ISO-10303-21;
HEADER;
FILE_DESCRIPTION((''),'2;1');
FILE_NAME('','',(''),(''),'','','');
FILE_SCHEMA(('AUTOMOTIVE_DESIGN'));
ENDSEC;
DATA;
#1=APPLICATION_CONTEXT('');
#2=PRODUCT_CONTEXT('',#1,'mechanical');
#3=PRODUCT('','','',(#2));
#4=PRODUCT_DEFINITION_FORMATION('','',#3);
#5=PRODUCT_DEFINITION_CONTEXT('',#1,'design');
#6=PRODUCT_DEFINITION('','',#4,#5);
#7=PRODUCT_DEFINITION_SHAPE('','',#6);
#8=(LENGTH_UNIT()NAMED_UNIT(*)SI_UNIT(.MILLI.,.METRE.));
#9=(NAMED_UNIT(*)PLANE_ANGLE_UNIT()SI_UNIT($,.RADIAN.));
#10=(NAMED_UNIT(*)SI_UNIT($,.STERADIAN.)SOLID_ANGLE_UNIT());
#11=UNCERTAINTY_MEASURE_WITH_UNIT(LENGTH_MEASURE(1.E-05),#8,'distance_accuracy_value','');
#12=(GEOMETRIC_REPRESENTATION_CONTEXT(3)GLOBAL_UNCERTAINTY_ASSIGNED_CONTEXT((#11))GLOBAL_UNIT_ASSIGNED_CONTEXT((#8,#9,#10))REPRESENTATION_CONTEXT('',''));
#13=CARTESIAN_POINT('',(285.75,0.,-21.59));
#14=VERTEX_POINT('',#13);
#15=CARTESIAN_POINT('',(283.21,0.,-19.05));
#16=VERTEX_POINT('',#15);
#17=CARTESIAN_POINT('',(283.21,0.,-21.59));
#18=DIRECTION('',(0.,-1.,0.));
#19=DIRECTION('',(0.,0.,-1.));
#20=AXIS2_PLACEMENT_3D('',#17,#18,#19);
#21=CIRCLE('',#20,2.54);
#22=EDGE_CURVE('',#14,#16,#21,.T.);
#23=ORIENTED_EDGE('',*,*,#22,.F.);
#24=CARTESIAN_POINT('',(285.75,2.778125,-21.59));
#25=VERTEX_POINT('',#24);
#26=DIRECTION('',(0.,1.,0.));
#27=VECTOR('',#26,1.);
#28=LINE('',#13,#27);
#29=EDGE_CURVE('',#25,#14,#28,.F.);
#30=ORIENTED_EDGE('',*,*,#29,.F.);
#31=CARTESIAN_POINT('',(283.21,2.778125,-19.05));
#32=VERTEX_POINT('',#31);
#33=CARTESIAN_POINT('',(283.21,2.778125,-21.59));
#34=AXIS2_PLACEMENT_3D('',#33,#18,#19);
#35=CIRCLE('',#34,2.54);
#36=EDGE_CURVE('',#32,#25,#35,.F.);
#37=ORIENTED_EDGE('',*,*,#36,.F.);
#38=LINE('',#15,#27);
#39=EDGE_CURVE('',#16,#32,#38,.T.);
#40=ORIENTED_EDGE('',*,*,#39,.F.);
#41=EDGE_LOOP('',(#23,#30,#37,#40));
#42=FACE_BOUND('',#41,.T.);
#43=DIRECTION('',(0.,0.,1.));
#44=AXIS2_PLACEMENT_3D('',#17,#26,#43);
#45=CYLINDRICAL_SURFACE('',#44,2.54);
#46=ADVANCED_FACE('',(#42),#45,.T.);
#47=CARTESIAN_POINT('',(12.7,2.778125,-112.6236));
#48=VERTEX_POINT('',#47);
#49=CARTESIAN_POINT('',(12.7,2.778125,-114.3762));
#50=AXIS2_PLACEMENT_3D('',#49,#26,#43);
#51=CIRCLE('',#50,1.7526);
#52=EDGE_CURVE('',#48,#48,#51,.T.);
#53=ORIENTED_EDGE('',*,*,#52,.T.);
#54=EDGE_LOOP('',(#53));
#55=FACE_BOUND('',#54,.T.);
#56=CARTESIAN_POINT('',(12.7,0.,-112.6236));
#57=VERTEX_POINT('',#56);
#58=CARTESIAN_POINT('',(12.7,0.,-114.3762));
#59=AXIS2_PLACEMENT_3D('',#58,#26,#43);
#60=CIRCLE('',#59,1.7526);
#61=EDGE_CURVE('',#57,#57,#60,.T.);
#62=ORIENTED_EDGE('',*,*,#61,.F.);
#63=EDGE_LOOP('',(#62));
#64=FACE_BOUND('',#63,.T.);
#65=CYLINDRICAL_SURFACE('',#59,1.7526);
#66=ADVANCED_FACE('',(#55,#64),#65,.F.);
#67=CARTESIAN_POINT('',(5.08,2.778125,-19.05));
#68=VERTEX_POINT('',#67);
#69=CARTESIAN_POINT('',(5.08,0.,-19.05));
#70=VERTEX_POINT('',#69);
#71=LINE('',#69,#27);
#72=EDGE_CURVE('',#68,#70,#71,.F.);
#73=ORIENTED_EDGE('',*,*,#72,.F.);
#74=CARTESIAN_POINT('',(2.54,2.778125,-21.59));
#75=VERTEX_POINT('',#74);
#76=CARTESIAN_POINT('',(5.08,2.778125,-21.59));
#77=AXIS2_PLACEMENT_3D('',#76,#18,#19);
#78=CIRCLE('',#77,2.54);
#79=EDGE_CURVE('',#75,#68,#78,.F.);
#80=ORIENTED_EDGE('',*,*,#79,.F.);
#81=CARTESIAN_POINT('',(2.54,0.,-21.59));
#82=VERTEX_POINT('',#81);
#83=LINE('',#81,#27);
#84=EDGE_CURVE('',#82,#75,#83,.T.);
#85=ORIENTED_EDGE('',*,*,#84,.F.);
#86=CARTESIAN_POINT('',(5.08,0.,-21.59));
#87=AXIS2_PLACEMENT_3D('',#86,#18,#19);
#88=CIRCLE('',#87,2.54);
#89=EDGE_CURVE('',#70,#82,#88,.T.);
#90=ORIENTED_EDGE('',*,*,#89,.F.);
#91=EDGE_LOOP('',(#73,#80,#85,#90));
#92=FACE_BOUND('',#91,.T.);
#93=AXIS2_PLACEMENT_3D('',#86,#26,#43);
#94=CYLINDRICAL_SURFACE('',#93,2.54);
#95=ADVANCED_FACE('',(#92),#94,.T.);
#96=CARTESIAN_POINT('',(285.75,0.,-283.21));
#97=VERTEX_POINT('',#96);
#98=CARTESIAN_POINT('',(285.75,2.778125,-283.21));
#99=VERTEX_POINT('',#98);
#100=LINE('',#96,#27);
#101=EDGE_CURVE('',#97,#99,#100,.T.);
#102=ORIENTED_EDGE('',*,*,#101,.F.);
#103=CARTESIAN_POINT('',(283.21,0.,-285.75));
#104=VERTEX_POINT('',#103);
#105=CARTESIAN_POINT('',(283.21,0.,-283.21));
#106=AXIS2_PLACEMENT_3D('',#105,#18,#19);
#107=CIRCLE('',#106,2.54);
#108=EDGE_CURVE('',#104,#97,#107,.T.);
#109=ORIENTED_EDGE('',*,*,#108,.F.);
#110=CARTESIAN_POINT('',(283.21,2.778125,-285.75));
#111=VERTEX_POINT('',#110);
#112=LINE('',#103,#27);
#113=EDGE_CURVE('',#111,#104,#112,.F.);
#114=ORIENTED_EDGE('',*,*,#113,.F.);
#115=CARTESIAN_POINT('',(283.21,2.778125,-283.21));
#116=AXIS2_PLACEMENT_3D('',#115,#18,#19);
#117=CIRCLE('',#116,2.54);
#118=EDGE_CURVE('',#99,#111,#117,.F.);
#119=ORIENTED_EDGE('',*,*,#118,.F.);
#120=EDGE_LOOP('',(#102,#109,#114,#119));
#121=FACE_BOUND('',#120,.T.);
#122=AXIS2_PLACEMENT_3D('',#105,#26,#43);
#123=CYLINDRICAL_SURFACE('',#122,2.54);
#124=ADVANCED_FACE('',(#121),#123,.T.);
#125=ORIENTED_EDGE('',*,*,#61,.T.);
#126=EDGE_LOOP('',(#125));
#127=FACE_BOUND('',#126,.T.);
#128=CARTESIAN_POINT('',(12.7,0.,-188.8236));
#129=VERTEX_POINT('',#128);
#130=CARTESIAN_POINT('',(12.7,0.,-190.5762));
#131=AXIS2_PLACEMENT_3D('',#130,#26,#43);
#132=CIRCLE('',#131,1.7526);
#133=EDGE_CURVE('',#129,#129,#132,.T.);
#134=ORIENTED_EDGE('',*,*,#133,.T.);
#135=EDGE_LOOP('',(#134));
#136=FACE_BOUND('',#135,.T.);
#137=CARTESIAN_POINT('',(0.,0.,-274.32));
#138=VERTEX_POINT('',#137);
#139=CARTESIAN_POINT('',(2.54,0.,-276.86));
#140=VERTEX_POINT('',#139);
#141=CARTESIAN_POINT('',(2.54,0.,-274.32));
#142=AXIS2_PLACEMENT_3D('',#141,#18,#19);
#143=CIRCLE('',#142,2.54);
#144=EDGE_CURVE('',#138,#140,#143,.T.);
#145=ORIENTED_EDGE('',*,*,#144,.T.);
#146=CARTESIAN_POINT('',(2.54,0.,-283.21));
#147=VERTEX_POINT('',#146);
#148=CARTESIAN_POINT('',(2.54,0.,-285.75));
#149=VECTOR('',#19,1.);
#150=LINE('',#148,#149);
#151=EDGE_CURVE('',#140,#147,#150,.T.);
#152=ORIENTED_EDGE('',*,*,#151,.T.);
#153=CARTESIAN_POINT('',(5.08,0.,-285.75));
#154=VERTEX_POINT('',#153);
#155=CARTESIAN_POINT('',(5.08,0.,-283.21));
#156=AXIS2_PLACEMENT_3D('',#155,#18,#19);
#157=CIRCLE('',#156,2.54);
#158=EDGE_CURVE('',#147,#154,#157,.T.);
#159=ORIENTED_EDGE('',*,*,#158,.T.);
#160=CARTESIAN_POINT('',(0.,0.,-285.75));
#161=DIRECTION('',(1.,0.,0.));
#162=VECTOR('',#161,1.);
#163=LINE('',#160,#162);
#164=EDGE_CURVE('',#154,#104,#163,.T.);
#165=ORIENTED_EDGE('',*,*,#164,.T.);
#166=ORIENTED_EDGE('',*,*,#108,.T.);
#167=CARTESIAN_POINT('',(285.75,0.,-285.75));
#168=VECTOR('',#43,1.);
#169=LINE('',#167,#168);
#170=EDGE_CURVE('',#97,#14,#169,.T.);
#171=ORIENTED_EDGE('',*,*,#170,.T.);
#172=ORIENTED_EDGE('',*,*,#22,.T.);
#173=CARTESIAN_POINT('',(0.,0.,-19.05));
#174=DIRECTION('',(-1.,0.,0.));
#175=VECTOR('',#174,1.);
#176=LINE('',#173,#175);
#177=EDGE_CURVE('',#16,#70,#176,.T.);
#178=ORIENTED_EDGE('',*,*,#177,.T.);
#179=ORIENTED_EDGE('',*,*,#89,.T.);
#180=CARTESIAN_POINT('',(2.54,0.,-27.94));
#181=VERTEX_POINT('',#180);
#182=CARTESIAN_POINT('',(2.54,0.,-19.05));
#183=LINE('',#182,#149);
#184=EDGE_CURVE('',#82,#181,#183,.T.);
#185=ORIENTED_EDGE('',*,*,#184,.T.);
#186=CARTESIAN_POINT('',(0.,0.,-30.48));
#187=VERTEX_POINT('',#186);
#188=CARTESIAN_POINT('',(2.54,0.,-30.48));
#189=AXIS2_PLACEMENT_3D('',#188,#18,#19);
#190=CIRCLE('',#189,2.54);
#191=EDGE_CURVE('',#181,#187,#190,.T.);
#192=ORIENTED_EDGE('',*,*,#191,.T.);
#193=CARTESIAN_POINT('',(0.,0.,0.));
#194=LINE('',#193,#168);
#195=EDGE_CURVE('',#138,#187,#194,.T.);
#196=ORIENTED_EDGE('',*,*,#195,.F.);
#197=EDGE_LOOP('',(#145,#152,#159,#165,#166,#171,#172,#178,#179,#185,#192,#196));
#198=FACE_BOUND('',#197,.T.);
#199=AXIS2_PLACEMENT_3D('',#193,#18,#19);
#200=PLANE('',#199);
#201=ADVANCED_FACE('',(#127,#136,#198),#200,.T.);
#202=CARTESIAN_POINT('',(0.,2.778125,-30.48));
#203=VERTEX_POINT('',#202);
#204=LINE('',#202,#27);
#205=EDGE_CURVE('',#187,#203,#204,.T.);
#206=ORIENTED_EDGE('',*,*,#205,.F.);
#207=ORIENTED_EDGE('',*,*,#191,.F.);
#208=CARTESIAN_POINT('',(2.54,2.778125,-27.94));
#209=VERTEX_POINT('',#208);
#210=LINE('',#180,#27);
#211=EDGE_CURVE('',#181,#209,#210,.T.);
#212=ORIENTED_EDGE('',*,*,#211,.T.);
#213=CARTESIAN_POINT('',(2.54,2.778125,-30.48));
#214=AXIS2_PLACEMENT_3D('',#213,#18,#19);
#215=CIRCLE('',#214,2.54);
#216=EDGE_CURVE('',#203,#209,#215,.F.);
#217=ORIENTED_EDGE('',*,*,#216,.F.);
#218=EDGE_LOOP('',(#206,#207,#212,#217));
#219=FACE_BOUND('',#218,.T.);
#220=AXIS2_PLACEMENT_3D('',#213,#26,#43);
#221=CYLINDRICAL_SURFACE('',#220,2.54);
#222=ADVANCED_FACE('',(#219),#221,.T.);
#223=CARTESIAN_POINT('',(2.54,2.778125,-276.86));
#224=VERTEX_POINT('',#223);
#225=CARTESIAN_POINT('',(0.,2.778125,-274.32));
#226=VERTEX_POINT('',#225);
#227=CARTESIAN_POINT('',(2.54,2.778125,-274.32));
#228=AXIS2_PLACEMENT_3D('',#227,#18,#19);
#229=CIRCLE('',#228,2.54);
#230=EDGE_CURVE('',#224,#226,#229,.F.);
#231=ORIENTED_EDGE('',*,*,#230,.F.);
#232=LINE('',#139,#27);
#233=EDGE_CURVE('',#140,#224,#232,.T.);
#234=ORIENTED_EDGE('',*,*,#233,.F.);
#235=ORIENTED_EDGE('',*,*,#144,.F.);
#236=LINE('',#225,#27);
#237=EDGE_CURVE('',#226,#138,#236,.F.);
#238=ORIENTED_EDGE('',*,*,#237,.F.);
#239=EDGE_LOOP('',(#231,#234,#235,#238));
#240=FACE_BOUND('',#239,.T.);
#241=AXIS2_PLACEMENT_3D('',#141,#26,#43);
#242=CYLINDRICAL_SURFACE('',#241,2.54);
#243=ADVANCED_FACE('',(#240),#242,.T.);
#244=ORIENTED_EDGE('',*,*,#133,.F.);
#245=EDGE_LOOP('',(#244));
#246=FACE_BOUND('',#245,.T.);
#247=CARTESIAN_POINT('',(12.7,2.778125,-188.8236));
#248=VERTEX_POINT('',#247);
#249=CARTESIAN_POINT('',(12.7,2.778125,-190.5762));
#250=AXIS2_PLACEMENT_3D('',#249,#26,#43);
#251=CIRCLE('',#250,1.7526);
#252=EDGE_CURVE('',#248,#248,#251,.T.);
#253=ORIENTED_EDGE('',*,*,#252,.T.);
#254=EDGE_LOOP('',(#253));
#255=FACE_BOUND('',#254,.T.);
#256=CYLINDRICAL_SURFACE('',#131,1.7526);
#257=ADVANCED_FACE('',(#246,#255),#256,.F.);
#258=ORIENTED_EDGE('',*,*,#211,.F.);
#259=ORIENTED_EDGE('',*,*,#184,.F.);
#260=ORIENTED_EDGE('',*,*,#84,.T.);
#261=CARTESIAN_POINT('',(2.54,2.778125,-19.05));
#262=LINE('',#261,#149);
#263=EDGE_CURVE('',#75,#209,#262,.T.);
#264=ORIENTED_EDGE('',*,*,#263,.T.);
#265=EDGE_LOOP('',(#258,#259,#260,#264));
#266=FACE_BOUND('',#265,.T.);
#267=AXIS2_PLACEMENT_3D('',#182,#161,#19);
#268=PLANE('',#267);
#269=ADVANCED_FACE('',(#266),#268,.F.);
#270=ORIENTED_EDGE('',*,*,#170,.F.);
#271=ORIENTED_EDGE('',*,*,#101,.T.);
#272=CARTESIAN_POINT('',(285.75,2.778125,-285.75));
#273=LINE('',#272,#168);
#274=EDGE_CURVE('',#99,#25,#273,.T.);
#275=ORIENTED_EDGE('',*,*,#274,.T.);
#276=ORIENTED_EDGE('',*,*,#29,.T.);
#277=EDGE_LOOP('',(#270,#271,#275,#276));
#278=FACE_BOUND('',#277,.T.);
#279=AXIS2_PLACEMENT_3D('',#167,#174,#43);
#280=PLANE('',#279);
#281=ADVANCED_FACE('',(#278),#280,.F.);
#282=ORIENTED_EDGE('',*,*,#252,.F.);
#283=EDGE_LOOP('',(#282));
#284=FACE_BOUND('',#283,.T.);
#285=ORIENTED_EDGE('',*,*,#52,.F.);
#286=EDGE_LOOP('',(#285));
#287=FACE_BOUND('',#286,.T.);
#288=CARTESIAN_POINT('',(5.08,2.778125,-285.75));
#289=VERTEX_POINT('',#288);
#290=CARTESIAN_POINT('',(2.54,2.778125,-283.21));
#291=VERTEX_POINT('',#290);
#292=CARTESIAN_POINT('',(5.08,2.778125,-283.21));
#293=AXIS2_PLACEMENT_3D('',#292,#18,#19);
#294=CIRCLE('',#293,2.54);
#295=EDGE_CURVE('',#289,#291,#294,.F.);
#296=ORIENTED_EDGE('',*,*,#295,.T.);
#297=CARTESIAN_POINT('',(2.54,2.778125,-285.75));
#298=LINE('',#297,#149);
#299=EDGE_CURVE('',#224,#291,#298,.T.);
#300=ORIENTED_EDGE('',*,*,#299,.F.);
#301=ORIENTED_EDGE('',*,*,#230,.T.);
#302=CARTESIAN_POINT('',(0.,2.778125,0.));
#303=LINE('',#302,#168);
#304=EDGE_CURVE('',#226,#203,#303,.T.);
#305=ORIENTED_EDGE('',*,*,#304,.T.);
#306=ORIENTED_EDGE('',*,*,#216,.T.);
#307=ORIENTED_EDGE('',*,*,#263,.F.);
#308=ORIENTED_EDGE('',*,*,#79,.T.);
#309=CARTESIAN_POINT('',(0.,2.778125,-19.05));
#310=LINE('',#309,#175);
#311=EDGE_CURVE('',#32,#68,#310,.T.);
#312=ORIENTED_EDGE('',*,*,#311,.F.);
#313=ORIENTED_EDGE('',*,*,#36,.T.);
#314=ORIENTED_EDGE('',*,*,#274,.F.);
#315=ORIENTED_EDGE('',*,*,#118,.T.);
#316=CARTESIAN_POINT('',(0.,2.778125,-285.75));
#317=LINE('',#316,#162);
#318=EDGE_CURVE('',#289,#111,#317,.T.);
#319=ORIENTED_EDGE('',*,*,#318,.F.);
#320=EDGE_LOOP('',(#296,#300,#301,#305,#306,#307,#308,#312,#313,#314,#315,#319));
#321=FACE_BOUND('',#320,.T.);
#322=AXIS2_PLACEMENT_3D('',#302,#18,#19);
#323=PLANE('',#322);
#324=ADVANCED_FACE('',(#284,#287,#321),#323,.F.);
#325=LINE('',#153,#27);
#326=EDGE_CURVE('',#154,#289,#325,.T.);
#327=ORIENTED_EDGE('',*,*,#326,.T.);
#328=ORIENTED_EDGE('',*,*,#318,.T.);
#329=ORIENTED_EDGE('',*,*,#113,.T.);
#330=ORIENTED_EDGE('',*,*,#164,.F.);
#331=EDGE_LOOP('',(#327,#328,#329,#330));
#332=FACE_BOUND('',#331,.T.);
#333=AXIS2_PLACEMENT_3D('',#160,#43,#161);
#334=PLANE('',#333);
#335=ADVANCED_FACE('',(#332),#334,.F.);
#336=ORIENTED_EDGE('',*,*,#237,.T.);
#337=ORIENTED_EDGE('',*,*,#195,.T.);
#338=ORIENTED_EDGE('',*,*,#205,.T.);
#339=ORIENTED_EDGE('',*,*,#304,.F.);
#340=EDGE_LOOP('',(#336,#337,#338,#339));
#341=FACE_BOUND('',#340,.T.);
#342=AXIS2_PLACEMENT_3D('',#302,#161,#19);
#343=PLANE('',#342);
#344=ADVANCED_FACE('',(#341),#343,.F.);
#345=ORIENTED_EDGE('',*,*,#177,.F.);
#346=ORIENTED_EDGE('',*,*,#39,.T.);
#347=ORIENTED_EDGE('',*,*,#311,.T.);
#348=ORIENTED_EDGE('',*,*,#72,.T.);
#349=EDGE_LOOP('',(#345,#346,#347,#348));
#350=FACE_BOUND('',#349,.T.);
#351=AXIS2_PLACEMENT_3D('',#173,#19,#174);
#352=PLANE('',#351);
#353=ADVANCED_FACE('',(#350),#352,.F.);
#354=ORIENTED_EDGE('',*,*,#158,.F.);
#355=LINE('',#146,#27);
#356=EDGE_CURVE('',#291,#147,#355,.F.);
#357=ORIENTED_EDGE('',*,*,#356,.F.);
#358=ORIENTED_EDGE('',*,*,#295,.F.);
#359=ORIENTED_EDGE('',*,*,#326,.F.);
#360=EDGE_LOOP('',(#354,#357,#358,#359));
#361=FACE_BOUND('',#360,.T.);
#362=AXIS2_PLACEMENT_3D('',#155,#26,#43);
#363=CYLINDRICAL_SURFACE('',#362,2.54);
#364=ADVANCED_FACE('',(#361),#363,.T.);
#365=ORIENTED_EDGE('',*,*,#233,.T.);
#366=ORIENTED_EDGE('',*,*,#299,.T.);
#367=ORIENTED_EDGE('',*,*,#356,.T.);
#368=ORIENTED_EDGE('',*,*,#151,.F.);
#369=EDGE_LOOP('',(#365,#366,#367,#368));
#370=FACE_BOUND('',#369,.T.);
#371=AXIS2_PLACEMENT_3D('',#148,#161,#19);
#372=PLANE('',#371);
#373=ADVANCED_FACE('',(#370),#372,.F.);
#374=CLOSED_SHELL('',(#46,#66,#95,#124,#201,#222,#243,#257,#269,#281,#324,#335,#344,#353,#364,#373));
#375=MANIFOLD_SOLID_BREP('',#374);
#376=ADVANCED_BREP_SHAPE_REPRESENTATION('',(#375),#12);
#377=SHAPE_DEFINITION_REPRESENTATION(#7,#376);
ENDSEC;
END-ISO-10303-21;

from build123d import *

# Parameters (mm, degrees)
SKETCH1_W           = 304.8
SKETCH1_H           = 304.8
BOSS_EXTRUDE1_DEPTH = 2.778125
SKETCH2_W           = 304.8
SKETCH2_H           = 19.05
CUT_EXTRUDE1_DEPTH  = 432.061246204
SKETCH4_R           = 1.7526
CUT_EXTRUDE3_DEPTH  = 418.808353768
SKETCH5_W           = 19.05
SKETCH5_H           = 266.7
CUT_EXTRUDE4_DEPTH  = 418.808353768
SKETCH6_W           = 2.54
SKETCH6_H           = 8.89
CUT_EXTRUDE5_DEPTH  = 405.121074653
FILLET1_R           = 2.54


with BuildPart() as part:
    # Sketch1 → Boss-Extrude1 (new body)
    with BuildSketch(Plane(origin=(0, 0, 0), x_dir=(1, 0, 0), z_dir=(0, 1, 0))):
        with Locations((152.4, 152.4)):
            Rectangle(SKETCH1_W, SKETCH1_H)
    extrude(amount=BOSS_EXTRUDE1_DEPTH)

    # Sketch2 → Cut-Extrude1 (cut, through all)
    with BuildSketch(Plane(origin=(0, 2.778125, 0), x_dir=(1, 0, 0), z_dir=(0, 1, 0))):
        with Locations((152.4, 9.525)):
            Rectangle(SKETCH2_W, SKETCH2_H)
        with Locations((152.4, 295.275)):
            Rectangle(SKETCH2_W, SKETCH2_H)
    extrude(amount=-CUT_EXTRUDE1_DEPTH, mode=Mode.SUBTRACT)

    # Sketch4 → Cut-Extrude3 (cut, through all)
    with BuildSketch(Plane(origin=(0, 2.778125, 0), x_dir=(1, 0, 0), z_dir=(0, 1, 0))):
        with Locations(Location((12.7, 190.5762, 0), (0, 0, 270))):
            Circle(SKETCH4_R)
        with Locations(Location((12.7, 114.3762, 0), (0, 0, 270))):
            Circle(SKETCH4_R)
    extrude(amount=-CUT_EXTRUDE3_DEPTH, mode=Mode.SUBTRACT)

    # Sketch5 → Cut-Extrude4 (cut, through all)
    with BuildSketch(Plane(origin=(0, 2.778125, 0), x_dir=(1, 0, 0), z_dir=(0, 1, 0))):
        with Locations((295.275, 152.4)):
            Rectangle(SKETCH5_W, SKETCH5_H)
    extrude(amount=-CUT_EXTRUDE4_DEPTH, mode=Mode.SUBTRACT)

    # Sketch6 → Cut-Extrude5 (cut, through all)
    with BuildSketch(Plane(origin=(0, 2.778125, 0), x_dir=(1, 0, 0), z_dir=(0, 1, 0))):
        with Locations((1.27, 281.305)):
            Rectangle(SKETCH6_W, SKETCH6_H)
        with Locations((1.27, 23.495)):
            Rectangle(SKETCH6_W, SKETCH6_H)
    extrude(amount=-CUT_EXTRUDE5_DEPTH, mode=Mode.SUBTRACT)

    # Fillet1
    fillet1_edges = [part.edges().sort_by_distance(p)[0] for p in [
        (285.75, 1.3890625, -19.05),
        (285.75, 1.3890625, -285.75),
        (0, 1.3890625, -276.86),
        (2.54, 1.3890625, -285.75),
        (2.54, 1.3890625, -19.05),
        (0, 1.3890625, -27.94),
    ]]
    fillet(fillet1_edges, radius=FILLET1_R - 0.0001)  # a hair under: the kernel refuses the full size


solid = part.part
